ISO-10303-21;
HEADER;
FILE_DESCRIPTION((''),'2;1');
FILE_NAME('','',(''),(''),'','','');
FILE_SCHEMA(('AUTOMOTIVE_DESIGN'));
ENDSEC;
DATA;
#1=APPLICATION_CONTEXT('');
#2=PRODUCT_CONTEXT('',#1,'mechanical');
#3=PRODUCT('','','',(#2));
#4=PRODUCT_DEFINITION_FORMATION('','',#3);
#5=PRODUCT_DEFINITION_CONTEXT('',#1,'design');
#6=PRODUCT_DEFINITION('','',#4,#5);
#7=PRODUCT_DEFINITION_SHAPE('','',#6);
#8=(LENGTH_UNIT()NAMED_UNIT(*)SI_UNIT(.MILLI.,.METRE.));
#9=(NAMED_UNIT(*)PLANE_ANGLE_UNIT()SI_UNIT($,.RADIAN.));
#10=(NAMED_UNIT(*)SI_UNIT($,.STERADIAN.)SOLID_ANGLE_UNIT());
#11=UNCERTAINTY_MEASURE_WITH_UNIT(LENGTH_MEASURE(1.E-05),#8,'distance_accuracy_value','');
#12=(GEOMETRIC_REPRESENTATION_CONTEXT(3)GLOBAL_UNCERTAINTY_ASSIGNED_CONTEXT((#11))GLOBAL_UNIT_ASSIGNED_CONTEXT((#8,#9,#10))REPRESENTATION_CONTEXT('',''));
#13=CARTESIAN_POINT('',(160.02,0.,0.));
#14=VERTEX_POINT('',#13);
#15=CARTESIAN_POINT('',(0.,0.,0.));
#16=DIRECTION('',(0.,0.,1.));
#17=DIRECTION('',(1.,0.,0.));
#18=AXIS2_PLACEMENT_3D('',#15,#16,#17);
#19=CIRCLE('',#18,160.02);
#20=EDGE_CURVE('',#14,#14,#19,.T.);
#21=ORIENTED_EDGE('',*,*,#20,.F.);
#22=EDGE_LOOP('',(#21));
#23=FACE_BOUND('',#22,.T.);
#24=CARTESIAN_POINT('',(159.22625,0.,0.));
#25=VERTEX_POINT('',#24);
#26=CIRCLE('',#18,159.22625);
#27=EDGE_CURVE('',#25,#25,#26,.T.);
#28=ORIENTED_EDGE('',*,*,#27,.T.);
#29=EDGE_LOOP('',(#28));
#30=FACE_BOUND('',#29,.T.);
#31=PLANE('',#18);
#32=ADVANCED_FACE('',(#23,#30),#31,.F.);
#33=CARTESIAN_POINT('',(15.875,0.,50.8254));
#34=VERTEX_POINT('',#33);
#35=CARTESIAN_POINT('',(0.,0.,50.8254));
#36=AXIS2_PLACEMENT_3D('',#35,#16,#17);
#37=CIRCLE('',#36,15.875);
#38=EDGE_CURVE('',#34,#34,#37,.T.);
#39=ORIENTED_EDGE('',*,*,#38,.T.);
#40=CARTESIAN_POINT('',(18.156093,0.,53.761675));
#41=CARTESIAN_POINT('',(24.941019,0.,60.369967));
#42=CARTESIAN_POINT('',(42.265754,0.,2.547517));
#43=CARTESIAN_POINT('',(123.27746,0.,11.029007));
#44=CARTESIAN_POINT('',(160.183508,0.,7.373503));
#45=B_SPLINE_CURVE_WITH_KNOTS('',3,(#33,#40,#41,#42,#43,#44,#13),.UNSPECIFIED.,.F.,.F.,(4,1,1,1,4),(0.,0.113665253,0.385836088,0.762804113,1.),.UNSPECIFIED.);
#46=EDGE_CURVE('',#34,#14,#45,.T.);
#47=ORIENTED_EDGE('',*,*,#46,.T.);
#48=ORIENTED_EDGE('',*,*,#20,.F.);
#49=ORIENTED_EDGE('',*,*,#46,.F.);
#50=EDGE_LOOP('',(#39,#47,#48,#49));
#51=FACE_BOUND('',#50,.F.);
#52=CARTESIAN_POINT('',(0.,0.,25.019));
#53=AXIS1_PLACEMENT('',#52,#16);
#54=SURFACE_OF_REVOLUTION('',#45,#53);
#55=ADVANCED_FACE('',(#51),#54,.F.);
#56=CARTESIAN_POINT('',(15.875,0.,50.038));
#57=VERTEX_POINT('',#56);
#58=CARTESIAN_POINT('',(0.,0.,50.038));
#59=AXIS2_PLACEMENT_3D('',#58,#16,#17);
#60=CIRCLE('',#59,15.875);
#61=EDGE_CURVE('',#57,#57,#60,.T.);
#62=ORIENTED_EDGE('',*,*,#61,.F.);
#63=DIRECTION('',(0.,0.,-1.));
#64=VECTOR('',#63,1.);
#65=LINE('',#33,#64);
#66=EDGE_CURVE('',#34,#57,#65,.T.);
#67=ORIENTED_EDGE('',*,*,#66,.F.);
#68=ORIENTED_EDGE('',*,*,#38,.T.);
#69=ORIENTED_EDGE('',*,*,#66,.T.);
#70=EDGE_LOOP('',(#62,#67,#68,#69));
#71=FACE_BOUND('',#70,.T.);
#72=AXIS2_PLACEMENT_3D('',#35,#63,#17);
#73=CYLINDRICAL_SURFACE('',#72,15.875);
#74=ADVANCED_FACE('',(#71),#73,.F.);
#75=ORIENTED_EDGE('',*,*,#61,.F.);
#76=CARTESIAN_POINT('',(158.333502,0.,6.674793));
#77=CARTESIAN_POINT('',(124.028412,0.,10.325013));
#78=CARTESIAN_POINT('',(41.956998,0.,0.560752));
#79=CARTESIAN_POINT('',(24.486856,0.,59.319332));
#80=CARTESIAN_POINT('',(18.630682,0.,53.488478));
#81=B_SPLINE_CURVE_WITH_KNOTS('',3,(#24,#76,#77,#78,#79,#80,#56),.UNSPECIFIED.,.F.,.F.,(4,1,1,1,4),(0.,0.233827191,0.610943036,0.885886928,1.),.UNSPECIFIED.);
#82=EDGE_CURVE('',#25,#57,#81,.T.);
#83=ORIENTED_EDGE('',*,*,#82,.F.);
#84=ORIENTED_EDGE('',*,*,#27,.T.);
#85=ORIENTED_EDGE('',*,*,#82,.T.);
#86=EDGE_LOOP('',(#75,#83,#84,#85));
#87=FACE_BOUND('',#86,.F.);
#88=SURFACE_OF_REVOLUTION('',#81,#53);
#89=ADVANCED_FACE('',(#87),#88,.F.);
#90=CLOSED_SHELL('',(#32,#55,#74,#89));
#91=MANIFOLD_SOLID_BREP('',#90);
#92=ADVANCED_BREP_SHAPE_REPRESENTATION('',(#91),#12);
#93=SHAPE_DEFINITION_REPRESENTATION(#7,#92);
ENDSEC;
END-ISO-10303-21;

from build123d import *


with BuildPart() as f1:
    # F0 (on Front) → F1 (revolve)
    with BuildSketch(Plane.XZ):
        with BuildLine():
            add(Edge.make_bspline(
                [(15.875, 50.8254), (18.1560927399, 53.7616752819), (24.9410186921, 60.3699666141), (42.2657536287, 2.5475173788), (123.2774600612, 11.029006723), (160.1835082148, 7.373502965), (160.02, 0)],
                knots=[0, 0, 0, 0, 0.1136652529, 0.3858360884, 0.7628041128, 1, 1, 1, 1], degree=3))
            Line((15.875, 50.8254), (15.875, 50.038))
            add(Edge.make_bspline(
                [(159.22625, 0), (158.333502125, 6.6747925157), (124.0284115088, 10.3250130142), (41.9569981259, 0.5607518275), (24.4868557715, 59.3193318652), (18.6306821606, 53.4884775444), (15.875, 50.038)],
                knots=[0, 0, 0, 0, 0.2338271909, 0.6109430364, 0.8858869277, 1, 1, 1, 1], degree=3))
            Line((159.22625, 0), (160.02, 0))
        make_face()
    revolve(axis=Axis((0, 0, 25.019), (0, 0, 1)))


solid = f1.part
